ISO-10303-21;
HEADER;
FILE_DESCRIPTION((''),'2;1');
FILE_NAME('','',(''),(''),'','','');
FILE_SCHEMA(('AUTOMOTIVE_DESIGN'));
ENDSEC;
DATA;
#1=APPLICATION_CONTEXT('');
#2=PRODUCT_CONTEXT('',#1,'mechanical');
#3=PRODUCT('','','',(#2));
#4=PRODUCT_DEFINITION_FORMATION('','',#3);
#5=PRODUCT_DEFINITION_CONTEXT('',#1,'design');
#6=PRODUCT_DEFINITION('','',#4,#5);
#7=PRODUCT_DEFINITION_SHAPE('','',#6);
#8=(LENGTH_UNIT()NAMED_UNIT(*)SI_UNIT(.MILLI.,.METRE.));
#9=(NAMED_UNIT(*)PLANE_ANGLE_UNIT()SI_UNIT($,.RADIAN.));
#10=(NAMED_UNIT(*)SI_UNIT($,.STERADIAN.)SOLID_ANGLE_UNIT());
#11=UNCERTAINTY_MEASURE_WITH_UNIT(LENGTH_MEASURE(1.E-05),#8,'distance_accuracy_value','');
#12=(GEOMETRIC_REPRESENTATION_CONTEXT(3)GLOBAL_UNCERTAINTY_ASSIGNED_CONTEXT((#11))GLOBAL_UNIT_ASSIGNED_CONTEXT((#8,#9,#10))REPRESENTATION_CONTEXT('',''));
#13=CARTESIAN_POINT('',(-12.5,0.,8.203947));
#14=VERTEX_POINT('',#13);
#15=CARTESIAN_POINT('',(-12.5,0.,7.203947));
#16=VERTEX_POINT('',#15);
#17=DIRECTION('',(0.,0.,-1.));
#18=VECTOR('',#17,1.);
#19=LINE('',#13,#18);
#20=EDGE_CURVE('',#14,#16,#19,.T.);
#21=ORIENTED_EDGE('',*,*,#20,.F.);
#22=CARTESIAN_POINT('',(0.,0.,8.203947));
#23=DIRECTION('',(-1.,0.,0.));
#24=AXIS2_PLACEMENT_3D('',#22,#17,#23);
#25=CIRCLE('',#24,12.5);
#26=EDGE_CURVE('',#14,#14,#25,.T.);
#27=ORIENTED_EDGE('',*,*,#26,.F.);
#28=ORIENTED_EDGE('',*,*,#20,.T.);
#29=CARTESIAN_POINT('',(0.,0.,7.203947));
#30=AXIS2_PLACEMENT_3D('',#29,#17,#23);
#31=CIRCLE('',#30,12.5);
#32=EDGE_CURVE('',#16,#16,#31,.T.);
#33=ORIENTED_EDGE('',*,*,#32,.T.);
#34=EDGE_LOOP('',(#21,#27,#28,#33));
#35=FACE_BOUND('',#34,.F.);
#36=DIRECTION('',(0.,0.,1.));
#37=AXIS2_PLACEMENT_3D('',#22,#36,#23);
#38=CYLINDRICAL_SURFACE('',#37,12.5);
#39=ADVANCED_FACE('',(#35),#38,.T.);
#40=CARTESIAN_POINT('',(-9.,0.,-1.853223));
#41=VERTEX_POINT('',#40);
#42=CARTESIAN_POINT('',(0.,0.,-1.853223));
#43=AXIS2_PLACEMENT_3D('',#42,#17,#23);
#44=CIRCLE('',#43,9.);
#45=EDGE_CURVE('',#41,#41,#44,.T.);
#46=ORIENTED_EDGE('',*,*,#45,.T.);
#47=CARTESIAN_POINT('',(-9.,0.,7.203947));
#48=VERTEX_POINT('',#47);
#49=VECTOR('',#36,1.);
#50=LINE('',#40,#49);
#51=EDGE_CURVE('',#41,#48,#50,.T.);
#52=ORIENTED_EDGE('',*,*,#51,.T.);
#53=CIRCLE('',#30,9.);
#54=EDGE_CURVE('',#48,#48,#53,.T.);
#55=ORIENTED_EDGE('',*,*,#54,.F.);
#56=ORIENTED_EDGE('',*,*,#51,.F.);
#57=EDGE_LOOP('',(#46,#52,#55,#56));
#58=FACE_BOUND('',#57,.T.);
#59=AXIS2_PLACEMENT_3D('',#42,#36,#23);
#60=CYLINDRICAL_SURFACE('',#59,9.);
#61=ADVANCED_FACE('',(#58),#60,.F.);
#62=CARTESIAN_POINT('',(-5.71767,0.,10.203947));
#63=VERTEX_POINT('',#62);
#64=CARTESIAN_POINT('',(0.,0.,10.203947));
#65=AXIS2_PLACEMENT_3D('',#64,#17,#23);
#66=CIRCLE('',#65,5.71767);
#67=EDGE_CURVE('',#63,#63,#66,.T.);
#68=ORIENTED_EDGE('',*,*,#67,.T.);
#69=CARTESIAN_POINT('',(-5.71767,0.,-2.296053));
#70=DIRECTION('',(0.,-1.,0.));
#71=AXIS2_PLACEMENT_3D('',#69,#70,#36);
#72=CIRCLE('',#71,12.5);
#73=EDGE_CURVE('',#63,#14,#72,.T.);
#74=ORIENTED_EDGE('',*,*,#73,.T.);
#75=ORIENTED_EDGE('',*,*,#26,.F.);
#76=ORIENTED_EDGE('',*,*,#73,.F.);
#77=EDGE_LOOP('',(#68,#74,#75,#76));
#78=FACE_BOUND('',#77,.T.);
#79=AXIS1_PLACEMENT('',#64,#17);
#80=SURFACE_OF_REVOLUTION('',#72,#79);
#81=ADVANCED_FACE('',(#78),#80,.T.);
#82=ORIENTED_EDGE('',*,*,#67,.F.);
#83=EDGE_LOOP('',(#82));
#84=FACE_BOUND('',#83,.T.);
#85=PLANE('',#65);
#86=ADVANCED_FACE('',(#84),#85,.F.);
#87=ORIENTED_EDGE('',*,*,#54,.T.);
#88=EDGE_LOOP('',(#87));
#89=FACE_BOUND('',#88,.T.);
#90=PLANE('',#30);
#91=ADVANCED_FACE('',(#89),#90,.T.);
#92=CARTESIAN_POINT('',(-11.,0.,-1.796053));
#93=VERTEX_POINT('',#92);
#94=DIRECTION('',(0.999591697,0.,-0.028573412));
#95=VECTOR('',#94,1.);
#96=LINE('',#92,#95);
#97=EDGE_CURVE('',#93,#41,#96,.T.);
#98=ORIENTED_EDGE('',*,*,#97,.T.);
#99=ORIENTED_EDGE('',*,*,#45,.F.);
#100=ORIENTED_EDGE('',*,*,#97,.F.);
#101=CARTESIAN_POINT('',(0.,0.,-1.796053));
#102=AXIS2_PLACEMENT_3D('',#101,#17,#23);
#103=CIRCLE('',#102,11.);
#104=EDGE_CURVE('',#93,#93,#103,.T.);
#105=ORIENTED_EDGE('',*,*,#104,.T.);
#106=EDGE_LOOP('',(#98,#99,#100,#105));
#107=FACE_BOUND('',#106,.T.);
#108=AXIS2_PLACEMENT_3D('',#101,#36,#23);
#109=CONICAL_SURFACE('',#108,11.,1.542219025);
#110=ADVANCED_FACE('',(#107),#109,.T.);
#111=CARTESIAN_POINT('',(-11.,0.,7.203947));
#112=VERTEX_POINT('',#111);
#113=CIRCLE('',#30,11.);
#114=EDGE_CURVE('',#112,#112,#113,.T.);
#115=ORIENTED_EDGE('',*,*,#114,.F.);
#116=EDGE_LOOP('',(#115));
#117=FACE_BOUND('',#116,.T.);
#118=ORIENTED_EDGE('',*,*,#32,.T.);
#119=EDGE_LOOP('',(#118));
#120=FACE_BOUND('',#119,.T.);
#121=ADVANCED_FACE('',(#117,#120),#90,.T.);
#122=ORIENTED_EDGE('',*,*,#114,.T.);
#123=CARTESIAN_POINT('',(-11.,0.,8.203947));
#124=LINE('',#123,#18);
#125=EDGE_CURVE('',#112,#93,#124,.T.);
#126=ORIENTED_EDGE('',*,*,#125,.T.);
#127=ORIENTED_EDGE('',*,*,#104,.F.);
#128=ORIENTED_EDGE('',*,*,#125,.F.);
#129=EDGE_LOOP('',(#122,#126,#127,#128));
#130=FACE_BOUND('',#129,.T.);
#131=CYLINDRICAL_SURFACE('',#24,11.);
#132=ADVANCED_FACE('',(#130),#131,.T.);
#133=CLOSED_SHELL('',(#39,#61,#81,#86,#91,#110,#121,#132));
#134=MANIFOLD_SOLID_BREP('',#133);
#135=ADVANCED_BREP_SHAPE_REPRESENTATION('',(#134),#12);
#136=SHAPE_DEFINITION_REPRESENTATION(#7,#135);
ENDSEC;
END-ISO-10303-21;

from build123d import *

# Parameters (mm, degrees)
F3_DEPTH = 1


# Not quite as in the source:
# - a fillet or chamfer that OpenCascade refuses, or shapes differently, is made with other operations: its cross-section is extruded or revolved along the edge and cut away or added


with BuildPart() as f1:
    # F0 (on Front) → F1 (revolve)
    with BuildSketch(Plane.XZ):
        Polygon((0, 7.2039468596), (0, 10.2039468596), (-12.5, 10.2039468596), (-12.5, 8.2039468596), (-11, 8.2039468596), (-11, -1.7960531404), (-9, -1.853223308), (-9, 7.2039468596), align=None)
    revolve(axis=Axis((0, 0, 8.7039468596), (0, 0, -1)))

    # F2: fillet of radius 12.5 on 1 edges, made by hand

    # F2_s1 → F2_t2 (revolve, cut)
    with BuildSketch(Plane.XZ):
        with BuildLine():
            ThreePointArc((-5.7176700169, 10.2039468596), (-9.2532039228, 9.6935256679), (-12.5, 8.2039468596))
            Line((-12.5, 8.2039468596), (-12.6356465997, 8.4139468596))
            ThreePointArc((-12.6356465997, 8.4139468596), (-12.75, 9.2039468596), (-12.75, 10.2039468596))
            Line((-12.75, 10.2039468596), (-12.5, 10.4539468596))
            Line((-12.5, 10.4539468596), (-5.7176700169, 10.4539468596))
            Line((-5.7176700169, 10.4539468596), (-5.7176700169, 10.2039468596))
        make_face()
    revolve(axis=Axis((0, 0, 10.2039468596), (0, 0, -1)), mode=Mode.SUBTRACT)

    # F3 (add): a face of the model
    f3_faces = [f1.faces().sort_by_distance(p)[0] for p in [
        (12.1464466094, 0, 8.2039468596),
    ]]
    extrude(f3_faces, amount=F3_DEPTH)


solid = f1.part
